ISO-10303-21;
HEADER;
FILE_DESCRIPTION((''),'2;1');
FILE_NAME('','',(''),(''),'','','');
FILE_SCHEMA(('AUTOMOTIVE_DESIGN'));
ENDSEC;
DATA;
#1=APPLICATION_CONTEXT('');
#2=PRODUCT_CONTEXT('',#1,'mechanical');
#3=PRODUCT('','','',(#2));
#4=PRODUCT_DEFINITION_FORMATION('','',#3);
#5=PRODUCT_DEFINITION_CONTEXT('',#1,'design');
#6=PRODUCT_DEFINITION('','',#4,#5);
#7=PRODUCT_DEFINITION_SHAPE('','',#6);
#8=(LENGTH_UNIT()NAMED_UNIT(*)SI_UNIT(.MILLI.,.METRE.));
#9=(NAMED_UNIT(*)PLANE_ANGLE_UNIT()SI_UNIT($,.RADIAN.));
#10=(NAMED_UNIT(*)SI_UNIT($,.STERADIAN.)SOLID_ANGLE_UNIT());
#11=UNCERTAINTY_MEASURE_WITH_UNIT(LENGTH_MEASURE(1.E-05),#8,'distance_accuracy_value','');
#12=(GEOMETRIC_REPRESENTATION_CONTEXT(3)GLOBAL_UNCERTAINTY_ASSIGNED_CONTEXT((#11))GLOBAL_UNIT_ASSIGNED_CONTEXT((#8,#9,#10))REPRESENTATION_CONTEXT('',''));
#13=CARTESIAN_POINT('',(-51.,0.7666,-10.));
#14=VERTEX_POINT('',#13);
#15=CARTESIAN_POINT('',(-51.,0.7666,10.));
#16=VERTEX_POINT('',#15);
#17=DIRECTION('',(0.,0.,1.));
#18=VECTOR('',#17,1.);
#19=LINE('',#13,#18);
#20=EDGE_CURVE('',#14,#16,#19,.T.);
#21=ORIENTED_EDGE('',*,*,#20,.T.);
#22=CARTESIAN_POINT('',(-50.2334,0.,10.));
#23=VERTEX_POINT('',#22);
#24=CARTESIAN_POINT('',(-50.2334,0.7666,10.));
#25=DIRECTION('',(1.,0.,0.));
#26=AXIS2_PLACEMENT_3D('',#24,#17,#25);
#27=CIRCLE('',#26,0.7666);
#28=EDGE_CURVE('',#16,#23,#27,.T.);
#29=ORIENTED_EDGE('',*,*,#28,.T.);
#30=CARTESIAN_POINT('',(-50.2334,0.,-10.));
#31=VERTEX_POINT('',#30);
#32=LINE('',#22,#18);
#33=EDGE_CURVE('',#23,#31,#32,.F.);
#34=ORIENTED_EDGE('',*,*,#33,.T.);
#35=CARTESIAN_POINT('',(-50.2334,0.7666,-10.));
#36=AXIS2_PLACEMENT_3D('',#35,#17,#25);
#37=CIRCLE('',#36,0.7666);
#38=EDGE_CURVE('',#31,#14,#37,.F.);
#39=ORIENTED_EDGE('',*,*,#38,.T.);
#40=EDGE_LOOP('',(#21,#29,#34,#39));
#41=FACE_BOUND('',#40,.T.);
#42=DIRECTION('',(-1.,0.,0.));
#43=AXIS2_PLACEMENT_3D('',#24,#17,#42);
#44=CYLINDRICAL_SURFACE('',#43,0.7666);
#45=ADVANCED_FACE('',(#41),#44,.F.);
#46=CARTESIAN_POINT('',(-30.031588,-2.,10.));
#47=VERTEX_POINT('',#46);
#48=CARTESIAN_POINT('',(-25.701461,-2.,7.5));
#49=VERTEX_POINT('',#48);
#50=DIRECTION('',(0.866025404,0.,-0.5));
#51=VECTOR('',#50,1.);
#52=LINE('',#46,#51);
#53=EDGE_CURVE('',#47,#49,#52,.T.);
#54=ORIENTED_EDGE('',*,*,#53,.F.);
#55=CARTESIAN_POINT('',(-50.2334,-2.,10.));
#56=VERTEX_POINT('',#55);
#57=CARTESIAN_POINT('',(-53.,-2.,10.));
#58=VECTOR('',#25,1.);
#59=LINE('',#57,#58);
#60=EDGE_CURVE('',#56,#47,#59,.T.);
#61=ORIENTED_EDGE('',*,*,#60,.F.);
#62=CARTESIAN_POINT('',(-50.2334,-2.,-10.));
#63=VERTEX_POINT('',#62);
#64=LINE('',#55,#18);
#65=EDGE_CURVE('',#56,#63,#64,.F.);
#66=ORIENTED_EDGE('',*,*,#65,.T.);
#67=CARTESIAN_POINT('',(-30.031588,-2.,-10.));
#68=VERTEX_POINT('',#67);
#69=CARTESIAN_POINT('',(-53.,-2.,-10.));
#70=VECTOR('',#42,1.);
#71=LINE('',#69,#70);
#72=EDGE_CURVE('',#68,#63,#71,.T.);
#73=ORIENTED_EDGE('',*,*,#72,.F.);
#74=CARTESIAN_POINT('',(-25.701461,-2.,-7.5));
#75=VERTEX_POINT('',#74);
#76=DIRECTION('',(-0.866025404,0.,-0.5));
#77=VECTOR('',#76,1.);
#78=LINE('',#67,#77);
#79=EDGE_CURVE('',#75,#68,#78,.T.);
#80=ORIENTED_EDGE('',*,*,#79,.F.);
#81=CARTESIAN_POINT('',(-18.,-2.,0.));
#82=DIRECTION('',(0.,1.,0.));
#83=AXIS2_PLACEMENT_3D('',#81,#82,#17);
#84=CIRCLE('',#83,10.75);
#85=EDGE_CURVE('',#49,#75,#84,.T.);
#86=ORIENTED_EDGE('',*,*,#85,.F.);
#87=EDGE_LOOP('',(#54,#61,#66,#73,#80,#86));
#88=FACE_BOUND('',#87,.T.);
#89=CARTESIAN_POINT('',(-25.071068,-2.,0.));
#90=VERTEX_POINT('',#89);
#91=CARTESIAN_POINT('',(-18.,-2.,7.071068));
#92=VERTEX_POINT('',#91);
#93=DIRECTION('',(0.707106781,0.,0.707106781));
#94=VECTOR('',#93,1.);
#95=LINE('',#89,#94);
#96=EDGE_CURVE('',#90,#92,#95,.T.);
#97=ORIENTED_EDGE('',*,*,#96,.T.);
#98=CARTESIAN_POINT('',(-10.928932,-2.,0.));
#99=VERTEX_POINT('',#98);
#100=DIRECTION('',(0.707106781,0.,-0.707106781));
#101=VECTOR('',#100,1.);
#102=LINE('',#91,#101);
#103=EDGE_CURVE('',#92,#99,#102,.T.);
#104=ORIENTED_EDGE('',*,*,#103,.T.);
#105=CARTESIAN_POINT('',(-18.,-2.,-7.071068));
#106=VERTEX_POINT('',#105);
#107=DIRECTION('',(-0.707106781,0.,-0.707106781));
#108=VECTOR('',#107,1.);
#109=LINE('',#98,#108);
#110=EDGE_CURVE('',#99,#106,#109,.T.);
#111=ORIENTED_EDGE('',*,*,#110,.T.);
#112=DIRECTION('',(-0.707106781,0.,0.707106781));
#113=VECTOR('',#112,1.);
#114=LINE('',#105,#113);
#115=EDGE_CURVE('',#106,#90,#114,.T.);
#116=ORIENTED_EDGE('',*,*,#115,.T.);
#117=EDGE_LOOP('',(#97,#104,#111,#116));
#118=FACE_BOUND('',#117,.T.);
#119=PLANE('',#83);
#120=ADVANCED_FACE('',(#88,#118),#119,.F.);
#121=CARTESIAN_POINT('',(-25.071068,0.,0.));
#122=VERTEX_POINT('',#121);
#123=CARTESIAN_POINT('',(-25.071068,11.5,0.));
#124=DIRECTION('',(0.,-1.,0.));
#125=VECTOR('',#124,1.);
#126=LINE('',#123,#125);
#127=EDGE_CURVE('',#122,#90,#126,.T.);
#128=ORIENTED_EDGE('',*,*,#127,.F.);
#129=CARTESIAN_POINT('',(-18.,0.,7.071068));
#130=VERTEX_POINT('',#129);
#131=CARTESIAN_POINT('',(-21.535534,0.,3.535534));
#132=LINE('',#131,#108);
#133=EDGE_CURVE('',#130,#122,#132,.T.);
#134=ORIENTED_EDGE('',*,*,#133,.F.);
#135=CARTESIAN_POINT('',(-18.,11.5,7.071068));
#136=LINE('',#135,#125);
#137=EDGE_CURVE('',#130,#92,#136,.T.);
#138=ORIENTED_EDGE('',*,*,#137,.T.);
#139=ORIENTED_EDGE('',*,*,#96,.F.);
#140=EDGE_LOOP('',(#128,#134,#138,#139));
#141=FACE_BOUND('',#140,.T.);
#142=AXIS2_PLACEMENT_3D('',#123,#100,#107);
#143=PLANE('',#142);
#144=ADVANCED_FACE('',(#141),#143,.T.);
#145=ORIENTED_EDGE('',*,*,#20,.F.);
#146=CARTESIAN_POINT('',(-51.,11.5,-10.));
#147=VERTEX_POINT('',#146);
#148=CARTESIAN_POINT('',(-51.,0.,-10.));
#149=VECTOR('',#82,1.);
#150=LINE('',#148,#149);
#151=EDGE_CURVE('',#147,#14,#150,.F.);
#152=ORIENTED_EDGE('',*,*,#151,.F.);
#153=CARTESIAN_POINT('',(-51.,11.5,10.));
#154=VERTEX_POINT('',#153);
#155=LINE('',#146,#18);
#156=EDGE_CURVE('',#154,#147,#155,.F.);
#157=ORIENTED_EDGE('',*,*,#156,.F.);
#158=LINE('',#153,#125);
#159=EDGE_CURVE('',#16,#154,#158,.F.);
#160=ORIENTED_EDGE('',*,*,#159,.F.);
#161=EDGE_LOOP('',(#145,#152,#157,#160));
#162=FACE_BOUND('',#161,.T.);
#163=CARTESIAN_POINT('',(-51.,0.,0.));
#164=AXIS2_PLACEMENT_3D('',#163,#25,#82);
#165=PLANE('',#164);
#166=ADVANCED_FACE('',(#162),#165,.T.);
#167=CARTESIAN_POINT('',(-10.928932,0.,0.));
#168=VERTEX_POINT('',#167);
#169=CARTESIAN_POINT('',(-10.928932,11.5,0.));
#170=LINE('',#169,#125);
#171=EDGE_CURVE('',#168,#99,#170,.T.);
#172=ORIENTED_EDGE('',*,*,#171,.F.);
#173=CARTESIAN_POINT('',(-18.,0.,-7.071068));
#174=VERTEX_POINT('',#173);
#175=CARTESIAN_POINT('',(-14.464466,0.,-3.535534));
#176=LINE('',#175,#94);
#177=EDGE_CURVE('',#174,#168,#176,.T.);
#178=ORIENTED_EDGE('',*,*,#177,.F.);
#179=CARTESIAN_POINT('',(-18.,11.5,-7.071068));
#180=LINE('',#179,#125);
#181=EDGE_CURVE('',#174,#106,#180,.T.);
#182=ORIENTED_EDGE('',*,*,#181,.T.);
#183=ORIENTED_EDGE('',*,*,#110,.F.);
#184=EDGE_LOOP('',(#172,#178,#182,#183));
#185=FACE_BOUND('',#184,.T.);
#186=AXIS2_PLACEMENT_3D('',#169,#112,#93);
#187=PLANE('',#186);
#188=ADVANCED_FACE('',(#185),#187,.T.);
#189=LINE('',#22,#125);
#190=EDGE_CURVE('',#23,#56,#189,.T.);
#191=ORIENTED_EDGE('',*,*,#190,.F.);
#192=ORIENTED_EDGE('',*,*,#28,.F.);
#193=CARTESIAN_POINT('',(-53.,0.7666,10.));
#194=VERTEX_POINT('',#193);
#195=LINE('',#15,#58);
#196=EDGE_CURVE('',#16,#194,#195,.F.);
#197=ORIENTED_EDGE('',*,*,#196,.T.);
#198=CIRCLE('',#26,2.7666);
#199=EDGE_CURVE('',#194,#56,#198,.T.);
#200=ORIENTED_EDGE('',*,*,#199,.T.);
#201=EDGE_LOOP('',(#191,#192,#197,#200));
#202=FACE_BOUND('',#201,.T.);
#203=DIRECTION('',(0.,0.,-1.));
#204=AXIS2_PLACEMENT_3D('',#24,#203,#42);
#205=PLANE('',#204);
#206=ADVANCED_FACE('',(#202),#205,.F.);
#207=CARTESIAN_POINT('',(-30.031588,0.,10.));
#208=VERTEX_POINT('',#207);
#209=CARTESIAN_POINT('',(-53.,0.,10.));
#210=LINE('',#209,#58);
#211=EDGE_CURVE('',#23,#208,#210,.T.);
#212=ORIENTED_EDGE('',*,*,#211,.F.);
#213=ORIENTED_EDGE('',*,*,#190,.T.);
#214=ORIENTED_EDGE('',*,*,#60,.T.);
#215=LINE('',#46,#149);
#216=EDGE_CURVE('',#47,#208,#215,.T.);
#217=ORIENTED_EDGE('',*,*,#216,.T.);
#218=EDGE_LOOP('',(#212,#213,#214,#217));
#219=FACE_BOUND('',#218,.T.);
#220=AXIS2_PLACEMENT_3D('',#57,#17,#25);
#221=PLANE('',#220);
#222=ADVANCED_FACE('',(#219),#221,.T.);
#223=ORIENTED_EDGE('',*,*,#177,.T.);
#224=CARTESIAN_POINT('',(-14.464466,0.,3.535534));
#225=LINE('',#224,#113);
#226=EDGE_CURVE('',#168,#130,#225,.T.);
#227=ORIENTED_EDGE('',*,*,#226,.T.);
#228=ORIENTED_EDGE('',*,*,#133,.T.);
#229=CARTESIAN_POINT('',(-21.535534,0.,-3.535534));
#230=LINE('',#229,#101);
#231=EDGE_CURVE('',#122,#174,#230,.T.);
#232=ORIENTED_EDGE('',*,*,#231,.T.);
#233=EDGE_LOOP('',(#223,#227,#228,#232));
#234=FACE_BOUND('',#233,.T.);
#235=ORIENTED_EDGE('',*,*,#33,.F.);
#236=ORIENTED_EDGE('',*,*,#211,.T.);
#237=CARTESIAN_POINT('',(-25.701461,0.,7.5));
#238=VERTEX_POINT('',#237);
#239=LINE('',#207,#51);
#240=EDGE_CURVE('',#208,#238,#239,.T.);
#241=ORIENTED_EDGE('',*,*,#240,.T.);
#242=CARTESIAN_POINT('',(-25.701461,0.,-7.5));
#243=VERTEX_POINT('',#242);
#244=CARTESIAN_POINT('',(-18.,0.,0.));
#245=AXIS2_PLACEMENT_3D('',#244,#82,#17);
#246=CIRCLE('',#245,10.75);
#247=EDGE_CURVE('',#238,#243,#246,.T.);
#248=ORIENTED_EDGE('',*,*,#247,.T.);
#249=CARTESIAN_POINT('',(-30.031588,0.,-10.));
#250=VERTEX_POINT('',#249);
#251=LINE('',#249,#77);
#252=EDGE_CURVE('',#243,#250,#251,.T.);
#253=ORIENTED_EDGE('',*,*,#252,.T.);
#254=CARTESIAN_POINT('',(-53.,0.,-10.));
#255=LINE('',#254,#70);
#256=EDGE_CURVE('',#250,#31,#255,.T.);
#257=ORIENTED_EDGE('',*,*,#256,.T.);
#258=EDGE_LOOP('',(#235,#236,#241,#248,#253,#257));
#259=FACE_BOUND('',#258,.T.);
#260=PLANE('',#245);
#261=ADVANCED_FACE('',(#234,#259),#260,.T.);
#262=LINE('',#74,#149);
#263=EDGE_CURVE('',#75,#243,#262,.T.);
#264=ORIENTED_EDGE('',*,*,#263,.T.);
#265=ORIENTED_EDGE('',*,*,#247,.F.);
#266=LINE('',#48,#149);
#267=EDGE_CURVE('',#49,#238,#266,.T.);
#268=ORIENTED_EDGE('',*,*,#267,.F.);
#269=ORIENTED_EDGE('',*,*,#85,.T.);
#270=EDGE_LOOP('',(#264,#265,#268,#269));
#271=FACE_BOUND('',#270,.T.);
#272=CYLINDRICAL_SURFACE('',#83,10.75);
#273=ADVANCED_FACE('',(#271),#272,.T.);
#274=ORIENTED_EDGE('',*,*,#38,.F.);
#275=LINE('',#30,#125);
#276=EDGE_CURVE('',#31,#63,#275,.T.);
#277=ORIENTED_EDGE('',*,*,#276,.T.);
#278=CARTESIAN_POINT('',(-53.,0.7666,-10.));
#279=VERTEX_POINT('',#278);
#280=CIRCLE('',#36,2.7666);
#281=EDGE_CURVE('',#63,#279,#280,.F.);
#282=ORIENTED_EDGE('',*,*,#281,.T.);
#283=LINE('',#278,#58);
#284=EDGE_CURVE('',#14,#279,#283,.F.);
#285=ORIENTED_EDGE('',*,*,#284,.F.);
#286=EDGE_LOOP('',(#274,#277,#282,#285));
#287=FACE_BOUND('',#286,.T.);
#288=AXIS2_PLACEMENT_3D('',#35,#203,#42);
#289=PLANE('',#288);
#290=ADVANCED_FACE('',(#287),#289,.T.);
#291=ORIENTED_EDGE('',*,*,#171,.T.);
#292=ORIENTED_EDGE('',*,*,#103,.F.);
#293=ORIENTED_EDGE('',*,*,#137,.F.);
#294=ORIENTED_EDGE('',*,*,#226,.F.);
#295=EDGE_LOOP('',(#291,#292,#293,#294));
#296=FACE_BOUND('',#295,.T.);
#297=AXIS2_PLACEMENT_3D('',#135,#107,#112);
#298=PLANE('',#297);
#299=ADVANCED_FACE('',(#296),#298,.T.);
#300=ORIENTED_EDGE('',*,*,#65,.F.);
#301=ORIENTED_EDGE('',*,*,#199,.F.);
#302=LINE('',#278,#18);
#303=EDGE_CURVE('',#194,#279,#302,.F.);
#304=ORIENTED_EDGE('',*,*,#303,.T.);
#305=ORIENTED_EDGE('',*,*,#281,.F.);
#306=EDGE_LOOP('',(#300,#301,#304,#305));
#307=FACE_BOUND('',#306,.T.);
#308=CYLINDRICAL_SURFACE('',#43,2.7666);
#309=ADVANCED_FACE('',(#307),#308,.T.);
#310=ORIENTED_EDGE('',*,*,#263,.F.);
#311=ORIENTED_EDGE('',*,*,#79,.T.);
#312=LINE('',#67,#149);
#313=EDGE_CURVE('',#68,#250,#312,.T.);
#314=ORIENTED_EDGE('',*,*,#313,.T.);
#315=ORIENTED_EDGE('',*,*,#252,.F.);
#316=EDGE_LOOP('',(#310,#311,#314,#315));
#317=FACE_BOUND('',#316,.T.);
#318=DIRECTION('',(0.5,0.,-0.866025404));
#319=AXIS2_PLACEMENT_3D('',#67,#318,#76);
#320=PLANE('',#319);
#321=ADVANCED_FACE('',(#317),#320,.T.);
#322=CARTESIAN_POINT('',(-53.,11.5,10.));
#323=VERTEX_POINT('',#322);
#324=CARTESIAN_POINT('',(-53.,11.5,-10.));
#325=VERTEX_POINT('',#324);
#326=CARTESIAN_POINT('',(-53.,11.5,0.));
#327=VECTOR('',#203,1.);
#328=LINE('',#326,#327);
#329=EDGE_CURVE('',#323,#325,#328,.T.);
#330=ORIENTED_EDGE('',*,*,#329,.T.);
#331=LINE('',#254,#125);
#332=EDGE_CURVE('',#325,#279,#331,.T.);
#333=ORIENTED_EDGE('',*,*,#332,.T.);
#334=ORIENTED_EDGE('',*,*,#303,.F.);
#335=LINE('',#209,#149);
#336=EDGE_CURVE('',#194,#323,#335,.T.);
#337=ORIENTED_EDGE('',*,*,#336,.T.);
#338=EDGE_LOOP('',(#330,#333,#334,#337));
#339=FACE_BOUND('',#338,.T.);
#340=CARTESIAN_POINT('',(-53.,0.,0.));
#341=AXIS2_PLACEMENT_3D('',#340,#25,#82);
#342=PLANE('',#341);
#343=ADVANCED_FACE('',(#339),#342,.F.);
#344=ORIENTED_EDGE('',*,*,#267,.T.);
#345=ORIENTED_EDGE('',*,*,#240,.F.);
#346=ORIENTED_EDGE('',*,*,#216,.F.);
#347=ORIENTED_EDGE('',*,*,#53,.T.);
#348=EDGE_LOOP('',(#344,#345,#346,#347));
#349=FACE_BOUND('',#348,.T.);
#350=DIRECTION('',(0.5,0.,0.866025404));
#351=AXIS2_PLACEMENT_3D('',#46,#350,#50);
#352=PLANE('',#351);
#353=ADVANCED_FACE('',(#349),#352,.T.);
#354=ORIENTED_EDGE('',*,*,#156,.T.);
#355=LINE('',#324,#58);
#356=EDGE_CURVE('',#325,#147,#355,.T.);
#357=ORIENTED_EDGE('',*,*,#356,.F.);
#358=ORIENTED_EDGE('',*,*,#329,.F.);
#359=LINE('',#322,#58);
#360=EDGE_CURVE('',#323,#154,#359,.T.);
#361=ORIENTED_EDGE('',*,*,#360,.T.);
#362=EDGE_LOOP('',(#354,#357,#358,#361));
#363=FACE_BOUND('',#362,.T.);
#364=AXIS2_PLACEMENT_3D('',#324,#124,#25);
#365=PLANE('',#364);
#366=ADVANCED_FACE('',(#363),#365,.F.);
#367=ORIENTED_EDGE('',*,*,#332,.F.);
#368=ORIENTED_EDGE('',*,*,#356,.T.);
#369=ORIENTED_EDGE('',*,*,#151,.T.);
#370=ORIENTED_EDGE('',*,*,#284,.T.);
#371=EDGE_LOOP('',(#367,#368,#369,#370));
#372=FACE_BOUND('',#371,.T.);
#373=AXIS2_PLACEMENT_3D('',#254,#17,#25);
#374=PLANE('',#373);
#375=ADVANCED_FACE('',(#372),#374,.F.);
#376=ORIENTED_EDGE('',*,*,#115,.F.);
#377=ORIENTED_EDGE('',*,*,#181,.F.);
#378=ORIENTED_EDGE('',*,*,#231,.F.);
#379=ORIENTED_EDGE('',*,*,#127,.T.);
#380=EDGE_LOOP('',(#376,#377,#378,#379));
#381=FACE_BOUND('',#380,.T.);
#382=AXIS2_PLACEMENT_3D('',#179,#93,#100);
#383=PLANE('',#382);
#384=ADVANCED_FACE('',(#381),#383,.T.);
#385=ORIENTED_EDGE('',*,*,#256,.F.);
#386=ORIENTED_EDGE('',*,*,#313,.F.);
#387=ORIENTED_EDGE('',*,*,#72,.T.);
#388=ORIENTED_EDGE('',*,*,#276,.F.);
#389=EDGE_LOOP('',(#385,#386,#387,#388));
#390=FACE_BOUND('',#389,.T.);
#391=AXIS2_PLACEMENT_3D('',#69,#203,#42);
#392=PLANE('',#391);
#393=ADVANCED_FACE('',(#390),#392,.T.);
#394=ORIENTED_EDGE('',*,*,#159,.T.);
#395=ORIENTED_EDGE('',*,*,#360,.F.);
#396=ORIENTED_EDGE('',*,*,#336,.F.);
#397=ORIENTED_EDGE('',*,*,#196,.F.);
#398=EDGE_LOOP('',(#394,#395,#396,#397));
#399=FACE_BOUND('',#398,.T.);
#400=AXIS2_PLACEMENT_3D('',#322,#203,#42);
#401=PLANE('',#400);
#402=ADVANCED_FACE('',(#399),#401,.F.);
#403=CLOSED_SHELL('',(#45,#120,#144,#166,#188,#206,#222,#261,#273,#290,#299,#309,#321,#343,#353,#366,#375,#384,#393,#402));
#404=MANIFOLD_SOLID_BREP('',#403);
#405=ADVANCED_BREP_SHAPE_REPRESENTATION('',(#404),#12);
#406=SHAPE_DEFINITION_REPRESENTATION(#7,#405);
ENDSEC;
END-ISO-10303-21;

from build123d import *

# Parameters (mm, degrees)
SM_BASE_FLANGE_1_DEPTH           = 2
SM_EDGE_FLANGE_1_STRIP_W         = 9.5332
SM_EDGE_FLANGE_1_STRIP_H         = 2
SM_EDGE_FLANGE_1_STRIP_CUT_DEPTH = 20
SM_EDGE_FLANGE_1_DEPTH           = 20
CUT_EXTRUDE_1_DEPTH              = 57.15881498


# Sheet-metal steps are written as plain solids
with BuildPart() as part:
    # Sketch 2 → 基体-法兰1 (new body)
    with BuildSketch(Plane(origin=(0, 0, 0), x_dir=(1, 0, 0), z_dir=(0, 1, 0))):
        with BuildLine():
            Line((-30.031587919, -10), (-25.7014609, -7.5))
            ThreePointArc((-25.7014609, -7.5), (-7.25, 0), (-25.7014609, 7.5))
            Line((-25.7014609, 7.5), (-30.031587919, 10))
            Line((-30.031587919, 10), (-53, 10))
            Line((-53, 10), (-53, -10))
            Line((-53, -10), (-30.031587919, -10))
        make_face()
    extrude(amount=-SM_BASE_FLANGE_1_DEPTH)

    # 边线-法兰1 strip (across the edge) → 边线-法兰1 strip cut (cut)
    with BuildSketch(Plane(origin=(-53, 0, -10), x_dir=(1, 0, 0), z_dir=(0, 0, 1))):
        with Locations((-2, -1)):
            Rectangle(SM_EDGE_FLANGE_1_STRIP_W, SM_EDGE_FLANGE_1_STRIP_H)
    extrude(amount=SM_EDGE_FLANGE_1_STRIP_CUT_DEPTH, mode=Mode.SUBTRACT)

    # 边线-法兰1 section (across the edge) → 边线-法兰1 (add)
    with BuildSketch(Plane(origin=(-53, 0, -10), x_dir=(1, 0, 0), z_dir=(0, 0, 1))):
        with BuildLine():
            Line((0, 0.7666), (0, 11.5))
            Line((0, 11.5), (2, 11.5))
            Line((2, 11.5), (2, 0.7666))
            ThreePointArc((2, 0.7666), (2.224531942, 0.224531942), (2.7666, 0))
            Line((2.7666, 0), (2.7666, -2))
            ThreePointArc((2.7666, -2), (0.810318379, -1.189681621), (0, 0.7666))
        make_face()
    extrude(amount=SM_EDGE_FLANGE_1_DEPTH)

    # 草图10 → 切除-拉伸1 (cut, through all)
    with BuildSketch(Plane(origin=(0, -2, -2), x_dir=(1, 0, 0), z_dir=(0, 1, 0))):
        Polygon((-18, 5.071067812), (-25.071067812, -2), (-18, -9.071067812), (-10.928932188, -2), align=None)
    extrude(amount=CUT_EXTRUDE_1_DEPTH, mode=Mode.SUBTRACT)


solid = part.part
